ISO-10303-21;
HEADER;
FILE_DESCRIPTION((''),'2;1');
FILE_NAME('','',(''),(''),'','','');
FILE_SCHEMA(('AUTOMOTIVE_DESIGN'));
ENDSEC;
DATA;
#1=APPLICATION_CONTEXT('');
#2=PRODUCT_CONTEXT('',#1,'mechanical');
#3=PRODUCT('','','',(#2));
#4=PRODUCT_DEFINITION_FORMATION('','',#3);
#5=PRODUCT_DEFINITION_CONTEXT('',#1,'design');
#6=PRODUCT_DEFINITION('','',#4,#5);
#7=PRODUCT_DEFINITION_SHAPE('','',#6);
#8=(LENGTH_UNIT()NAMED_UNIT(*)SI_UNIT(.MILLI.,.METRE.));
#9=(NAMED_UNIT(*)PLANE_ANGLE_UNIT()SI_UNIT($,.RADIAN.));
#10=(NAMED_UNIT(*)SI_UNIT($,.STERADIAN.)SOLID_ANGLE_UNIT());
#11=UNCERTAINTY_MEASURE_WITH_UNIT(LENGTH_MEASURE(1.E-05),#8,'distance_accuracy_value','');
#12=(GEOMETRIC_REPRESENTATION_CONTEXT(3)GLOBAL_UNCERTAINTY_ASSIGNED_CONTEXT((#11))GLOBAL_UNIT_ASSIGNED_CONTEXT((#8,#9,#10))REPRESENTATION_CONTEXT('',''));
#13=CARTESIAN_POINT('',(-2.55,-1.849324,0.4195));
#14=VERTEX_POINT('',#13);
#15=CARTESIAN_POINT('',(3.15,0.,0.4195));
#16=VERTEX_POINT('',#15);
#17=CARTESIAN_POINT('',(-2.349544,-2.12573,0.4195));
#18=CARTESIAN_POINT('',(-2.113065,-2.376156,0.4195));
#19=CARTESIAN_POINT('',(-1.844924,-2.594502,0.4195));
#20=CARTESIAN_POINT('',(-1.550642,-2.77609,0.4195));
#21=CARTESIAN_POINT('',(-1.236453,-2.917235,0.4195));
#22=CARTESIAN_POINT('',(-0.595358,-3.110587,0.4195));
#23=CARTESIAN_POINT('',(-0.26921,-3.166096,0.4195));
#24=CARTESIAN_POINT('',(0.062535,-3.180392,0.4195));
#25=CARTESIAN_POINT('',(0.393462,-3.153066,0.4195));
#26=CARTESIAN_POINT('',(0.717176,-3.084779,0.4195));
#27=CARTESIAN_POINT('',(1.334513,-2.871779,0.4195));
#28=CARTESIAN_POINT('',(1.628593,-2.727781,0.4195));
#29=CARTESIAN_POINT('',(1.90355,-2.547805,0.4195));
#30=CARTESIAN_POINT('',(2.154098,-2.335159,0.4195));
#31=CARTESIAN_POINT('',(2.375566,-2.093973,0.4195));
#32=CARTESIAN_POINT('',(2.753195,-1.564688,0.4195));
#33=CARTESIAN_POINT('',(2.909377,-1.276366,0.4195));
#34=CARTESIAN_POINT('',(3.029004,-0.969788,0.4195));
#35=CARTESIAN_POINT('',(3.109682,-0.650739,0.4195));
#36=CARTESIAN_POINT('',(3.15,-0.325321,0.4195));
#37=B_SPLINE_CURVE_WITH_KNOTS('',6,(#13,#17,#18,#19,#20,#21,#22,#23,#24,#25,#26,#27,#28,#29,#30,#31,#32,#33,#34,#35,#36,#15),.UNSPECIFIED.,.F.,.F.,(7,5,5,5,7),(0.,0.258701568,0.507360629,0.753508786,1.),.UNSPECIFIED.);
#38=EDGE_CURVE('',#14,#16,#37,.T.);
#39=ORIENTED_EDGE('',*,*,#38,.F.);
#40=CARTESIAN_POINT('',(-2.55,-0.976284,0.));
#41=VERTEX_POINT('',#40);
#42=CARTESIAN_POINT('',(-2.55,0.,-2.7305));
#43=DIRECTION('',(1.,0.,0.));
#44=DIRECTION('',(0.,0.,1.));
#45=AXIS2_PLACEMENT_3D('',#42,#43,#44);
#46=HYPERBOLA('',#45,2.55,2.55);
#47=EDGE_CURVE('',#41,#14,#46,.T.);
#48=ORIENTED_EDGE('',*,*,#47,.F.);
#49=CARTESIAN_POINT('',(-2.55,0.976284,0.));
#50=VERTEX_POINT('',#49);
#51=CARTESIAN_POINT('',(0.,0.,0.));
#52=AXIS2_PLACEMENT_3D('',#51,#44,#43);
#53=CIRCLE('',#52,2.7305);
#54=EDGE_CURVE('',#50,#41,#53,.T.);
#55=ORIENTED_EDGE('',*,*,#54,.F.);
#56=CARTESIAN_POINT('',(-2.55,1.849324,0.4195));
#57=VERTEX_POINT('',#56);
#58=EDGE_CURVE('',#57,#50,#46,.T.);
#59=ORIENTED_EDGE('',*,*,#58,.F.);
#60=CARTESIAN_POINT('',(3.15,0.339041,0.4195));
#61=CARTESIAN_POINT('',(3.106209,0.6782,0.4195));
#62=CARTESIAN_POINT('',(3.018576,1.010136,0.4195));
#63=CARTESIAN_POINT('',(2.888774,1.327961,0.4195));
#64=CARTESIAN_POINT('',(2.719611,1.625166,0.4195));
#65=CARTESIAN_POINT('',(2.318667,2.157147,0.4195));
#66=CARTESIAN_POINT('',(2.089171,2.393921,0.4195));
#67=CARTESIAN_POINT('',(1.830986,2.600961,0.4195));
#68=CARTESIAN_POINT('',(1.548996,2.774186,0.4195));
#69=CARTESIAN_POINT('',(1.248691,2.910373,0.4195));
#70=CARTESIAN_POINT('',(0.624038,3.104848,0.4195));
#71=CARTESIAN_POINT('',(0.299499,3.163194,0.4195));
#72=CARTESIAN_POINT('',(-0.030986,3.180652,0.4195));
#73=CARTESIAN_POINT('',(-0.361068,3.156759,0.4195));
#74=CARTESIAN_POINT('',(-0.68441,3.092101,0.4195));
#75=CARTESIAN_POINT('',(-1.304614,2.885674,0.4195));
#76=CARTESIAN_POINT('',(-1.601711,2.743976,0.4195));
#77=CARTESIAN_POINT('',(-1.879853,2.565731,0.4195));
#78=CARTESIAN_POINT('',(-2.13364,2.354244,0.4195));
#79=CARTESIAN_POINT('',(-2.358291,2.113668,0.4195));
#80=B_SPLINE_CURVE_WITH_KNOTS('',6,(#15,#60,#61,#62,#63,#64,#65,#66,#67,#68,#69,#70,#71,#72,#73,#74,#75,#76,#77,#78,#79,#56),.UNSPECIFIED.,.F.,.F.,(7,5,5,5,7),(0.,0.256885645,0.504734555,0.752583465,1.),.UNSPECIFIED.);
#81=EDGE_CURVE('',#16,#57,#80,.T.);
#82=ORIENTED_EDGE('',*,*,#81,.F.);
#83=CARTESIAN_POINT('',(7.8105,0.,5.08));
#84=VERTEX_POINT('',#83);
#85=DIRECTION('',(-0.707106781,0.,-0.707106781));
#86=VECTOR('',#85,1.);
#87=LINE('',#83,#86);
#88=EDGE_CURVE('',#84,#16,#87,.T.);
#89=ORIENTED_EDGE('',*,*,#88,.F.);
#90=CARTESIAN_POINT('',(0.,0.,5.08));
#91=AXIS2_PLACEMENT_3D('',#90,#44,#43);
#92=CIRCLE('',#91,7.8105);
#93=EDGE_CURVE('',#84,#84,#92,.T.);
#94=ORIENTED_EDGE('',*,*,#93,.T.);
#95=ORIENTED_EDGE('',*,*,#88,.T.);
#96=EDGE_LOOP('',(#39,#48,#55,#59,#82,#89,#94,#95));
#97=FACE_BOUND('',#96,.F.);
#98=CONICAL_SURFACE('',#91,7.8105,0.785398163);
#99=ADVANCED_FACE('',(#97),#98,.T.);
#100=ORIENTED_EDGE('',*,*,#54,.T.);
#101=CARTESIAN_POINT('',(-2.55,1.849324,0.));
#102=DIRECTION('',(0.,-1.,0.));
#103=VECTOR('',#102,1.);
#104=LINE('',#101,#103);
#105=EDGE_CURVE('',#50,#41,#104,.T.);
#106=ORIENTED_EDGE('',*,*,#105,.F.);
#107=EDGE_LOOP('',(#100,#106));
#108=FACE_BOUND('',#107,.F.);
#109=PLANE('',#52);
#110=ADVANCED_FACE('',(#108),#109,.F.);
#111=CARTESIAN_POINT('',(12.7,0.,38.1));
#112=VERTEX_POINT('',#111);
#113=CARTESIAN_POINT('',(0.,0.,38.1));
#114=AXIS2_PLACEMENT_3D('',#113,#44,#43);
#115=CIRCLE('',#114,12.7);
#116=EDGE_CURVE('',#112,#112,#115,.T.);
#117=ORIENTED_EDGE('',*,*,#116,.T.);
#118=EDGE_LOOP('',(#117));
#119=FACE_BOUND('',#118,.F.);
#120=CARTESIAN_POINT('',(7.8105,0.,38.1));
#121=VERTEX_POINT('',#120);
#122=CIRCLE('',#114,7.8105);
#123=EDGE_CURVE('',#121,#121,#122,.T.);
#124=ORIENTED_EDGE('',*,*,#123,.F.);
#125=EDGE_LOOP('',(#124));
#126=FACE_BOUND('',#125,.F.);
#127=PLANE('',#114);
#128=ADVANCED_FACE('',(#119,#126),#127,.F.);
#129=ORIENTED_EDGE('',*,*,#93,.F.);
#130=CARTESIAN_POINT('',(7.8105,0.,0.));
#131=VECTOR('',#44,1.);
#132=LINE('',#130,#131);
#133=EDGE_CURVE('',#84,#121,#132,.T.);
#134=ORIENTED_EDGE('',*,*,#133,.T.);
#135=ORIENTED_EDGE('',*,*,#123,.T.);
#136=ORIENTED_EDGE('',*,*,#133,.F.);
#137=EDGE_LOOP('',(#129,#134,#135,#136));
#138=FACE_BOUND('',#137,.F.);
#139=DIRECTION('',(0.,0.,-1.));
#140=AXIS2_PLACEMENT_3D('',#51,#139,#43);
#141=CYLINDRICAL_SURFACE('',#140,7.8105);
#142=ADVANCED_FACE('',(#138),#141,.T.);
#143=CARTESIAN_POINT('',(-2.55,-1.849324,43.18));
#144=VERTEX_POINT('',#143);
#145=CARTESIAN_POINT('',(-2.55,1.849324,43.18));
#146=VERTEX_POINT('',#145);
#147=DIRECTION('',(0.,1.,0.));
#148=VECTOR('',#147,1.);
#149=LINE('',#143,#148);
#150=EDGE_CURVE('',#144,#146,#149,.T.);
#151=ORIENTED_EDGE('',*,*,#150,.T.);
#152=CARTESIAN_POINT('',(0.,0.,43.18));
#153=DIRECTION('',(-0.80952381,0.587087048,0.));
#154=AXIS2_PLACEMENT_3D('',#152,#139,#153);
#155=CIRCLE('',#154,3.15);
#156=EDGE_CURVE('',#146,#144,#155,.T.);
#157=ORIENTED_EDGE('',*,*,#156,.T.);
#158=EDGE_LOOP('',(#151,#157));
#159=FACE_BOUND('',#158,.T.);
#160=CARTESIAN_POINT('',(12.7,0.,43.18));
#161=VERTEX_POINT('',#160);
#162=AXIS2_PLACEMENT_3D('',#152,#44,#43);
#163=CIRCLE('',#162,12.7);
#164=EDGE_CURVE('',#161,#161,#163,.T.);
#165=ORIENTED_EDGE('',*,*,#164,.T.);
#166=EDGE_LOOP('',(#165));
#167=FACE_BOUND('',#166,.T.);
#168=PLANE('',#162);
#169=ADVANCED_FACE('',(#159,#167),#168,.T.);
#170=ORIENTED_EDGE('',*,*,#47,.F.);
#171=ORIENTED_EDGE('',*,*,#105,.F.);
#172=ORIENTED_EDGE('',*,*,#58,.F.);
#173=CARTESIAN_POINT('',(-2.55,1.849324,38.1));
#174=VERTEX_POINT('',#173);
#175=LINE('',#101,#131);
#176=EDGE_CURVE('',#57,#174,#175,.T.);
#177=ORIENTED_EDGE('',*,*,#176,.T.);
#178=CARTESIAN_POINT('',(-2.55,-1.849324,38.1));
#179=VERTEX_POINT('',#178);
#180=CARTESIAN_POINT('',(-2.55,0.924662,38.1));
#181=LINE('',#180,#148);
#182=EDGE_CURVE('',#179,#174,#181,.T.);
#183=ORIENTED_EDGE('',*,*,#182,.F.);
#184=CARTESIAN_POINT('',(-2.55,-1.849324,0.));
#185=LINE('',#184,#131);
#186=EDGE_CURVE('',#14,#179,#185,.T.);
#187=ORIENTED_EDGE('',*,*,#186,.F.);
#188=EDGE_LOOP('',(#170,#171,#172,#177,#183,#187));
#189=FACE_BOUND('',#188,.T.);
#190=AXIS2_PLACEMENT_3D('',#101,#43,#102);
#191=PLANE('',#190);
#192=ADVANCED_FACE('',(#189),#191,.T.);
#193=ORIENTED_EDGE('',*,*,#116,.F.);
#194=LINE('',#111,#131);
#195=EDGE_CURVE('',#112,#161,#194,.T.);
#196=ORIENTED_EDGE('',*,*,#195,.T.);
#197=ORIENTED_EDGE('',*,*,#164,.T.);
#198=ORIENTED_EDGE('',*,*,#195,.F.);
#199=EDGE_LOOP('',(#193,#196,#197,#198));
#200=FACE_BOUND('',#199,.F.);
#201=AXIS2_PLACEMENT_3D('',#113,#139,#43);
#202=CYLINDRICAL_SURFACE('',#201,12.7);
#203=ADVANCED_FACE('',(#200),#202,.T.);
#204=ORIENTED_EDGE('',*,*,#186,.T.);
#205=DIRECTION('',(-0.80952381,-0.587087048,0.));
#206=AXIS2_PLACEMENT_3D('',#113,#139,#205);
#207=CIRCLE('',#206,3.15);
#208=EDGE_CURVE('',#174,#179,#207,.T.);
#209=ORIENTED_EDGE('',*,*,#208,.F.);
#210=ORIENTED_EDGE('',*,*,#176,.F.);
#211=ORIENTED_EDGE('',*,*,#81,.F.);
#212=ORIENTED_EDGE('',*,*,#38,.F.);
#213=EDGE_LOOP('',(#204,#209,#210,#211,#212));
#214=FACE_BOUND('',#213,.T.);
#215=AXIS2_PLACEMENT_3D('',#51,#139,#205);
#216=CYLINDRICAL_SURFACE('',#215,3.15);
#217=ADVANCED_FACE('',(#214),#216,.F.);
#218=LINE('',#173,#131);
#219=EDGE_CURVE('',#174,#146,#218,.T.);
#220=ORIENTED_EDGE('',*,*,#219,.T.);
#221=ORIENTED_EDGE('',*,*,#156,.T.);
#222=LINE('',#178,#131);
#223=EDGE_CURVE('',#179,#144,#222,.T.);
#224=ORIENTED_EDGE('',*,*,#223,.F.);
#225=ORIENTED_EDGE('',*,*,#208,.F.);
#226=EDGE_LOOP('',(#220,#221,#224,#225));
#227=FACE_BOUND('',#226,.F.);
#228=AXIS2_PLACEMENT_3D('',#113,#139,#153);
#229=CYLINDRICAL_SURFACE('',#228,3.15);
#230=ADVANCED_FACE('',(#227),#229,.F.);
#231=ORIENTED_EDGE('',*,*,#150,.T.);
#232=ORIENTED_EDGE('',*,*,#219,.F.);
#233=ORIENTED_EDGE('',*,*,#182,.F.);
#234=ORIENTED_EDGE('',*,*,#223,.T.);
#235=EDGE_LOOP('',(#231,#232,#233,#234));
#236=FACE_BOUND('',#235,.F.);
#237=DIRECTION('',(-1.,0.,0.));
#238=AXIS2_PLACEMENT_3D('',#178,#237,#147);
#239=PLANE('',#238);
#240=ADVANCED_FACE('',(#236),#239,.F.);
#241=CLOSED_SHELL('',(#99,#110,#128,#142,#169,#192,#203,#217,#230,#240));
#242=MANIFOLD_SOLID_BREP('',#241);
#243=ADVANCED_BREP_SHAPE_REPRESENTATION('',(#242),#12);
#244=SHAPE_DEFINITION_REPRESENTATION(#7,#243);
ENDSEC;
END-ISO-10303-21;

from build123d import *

# Parameters (mm, degrees)
F1_R     = 7.8105
F2_DEPTH = 38.1
F3_DEPTH = 50.8
F4_R     = 12.7
F4_R_2   = 7.8105
F5_DEPTH = 5.08


# Not quite as in the source:
# - a fillet or chamfer that OpenCascade refuses, or shapes differently, is made with other operations: its cross-section is extruded or revolved along the edge and cut away or added


with BuildPart() as f2:
    # F1 (on Top) → F2 (new body)
    with BuildSketch(Plane.XY):
        Circle(F1_R)
    extrude(amount=F2_DEPTH)

    # F0 (on Top) → F3 (cut)
    with BuildSketch(Plane.XY):
        with BuildLine():
            Line((-2.55, 1.8493242009), (-2.55, -1.8493242009))
            ThreePointArc((-2.55, -1.8493242009), (3.15, 0), (-2.55, 1.8493242009))
        make_face()
    extrude(amount=F3_DEPTH, mode=Mode.SUBTRACT)

    # F4 (on face) → F5 (join)
    with BuildSketch(Plane.XY.offset(38.1)):
        Circle(F4_R)
        Circle(F4_R_2, mode=Mode.SUBTRACT)
        Circle(F4_R_2)
        with BuildLine():
            Line((-2.55, -1.8493242009), (-2.55, 1.8493242009))
            ThreePointArc((-2.55, 1.8493242009), (3.15, 0), (-2.55, -1.8493242009))
        make_face(mode=Mode.SUBTRACT)
    extrude(amount=F5_DEPTH)

    # F6: chamfer of 5.08 on 1 edges, made by hand

    # F6_s1 → F6_t2 (revolve, cut)
    with BuildSketch(Plane.XZ):
        Polygon((7.8105, 5.08), (2.7305, 0), (7.8105, 0), align=None)
    revolve(axis=Axis((0, 0, 0), (0, 0, 1)), mode=Mode.SUBTRACT)


solid = f2.part
